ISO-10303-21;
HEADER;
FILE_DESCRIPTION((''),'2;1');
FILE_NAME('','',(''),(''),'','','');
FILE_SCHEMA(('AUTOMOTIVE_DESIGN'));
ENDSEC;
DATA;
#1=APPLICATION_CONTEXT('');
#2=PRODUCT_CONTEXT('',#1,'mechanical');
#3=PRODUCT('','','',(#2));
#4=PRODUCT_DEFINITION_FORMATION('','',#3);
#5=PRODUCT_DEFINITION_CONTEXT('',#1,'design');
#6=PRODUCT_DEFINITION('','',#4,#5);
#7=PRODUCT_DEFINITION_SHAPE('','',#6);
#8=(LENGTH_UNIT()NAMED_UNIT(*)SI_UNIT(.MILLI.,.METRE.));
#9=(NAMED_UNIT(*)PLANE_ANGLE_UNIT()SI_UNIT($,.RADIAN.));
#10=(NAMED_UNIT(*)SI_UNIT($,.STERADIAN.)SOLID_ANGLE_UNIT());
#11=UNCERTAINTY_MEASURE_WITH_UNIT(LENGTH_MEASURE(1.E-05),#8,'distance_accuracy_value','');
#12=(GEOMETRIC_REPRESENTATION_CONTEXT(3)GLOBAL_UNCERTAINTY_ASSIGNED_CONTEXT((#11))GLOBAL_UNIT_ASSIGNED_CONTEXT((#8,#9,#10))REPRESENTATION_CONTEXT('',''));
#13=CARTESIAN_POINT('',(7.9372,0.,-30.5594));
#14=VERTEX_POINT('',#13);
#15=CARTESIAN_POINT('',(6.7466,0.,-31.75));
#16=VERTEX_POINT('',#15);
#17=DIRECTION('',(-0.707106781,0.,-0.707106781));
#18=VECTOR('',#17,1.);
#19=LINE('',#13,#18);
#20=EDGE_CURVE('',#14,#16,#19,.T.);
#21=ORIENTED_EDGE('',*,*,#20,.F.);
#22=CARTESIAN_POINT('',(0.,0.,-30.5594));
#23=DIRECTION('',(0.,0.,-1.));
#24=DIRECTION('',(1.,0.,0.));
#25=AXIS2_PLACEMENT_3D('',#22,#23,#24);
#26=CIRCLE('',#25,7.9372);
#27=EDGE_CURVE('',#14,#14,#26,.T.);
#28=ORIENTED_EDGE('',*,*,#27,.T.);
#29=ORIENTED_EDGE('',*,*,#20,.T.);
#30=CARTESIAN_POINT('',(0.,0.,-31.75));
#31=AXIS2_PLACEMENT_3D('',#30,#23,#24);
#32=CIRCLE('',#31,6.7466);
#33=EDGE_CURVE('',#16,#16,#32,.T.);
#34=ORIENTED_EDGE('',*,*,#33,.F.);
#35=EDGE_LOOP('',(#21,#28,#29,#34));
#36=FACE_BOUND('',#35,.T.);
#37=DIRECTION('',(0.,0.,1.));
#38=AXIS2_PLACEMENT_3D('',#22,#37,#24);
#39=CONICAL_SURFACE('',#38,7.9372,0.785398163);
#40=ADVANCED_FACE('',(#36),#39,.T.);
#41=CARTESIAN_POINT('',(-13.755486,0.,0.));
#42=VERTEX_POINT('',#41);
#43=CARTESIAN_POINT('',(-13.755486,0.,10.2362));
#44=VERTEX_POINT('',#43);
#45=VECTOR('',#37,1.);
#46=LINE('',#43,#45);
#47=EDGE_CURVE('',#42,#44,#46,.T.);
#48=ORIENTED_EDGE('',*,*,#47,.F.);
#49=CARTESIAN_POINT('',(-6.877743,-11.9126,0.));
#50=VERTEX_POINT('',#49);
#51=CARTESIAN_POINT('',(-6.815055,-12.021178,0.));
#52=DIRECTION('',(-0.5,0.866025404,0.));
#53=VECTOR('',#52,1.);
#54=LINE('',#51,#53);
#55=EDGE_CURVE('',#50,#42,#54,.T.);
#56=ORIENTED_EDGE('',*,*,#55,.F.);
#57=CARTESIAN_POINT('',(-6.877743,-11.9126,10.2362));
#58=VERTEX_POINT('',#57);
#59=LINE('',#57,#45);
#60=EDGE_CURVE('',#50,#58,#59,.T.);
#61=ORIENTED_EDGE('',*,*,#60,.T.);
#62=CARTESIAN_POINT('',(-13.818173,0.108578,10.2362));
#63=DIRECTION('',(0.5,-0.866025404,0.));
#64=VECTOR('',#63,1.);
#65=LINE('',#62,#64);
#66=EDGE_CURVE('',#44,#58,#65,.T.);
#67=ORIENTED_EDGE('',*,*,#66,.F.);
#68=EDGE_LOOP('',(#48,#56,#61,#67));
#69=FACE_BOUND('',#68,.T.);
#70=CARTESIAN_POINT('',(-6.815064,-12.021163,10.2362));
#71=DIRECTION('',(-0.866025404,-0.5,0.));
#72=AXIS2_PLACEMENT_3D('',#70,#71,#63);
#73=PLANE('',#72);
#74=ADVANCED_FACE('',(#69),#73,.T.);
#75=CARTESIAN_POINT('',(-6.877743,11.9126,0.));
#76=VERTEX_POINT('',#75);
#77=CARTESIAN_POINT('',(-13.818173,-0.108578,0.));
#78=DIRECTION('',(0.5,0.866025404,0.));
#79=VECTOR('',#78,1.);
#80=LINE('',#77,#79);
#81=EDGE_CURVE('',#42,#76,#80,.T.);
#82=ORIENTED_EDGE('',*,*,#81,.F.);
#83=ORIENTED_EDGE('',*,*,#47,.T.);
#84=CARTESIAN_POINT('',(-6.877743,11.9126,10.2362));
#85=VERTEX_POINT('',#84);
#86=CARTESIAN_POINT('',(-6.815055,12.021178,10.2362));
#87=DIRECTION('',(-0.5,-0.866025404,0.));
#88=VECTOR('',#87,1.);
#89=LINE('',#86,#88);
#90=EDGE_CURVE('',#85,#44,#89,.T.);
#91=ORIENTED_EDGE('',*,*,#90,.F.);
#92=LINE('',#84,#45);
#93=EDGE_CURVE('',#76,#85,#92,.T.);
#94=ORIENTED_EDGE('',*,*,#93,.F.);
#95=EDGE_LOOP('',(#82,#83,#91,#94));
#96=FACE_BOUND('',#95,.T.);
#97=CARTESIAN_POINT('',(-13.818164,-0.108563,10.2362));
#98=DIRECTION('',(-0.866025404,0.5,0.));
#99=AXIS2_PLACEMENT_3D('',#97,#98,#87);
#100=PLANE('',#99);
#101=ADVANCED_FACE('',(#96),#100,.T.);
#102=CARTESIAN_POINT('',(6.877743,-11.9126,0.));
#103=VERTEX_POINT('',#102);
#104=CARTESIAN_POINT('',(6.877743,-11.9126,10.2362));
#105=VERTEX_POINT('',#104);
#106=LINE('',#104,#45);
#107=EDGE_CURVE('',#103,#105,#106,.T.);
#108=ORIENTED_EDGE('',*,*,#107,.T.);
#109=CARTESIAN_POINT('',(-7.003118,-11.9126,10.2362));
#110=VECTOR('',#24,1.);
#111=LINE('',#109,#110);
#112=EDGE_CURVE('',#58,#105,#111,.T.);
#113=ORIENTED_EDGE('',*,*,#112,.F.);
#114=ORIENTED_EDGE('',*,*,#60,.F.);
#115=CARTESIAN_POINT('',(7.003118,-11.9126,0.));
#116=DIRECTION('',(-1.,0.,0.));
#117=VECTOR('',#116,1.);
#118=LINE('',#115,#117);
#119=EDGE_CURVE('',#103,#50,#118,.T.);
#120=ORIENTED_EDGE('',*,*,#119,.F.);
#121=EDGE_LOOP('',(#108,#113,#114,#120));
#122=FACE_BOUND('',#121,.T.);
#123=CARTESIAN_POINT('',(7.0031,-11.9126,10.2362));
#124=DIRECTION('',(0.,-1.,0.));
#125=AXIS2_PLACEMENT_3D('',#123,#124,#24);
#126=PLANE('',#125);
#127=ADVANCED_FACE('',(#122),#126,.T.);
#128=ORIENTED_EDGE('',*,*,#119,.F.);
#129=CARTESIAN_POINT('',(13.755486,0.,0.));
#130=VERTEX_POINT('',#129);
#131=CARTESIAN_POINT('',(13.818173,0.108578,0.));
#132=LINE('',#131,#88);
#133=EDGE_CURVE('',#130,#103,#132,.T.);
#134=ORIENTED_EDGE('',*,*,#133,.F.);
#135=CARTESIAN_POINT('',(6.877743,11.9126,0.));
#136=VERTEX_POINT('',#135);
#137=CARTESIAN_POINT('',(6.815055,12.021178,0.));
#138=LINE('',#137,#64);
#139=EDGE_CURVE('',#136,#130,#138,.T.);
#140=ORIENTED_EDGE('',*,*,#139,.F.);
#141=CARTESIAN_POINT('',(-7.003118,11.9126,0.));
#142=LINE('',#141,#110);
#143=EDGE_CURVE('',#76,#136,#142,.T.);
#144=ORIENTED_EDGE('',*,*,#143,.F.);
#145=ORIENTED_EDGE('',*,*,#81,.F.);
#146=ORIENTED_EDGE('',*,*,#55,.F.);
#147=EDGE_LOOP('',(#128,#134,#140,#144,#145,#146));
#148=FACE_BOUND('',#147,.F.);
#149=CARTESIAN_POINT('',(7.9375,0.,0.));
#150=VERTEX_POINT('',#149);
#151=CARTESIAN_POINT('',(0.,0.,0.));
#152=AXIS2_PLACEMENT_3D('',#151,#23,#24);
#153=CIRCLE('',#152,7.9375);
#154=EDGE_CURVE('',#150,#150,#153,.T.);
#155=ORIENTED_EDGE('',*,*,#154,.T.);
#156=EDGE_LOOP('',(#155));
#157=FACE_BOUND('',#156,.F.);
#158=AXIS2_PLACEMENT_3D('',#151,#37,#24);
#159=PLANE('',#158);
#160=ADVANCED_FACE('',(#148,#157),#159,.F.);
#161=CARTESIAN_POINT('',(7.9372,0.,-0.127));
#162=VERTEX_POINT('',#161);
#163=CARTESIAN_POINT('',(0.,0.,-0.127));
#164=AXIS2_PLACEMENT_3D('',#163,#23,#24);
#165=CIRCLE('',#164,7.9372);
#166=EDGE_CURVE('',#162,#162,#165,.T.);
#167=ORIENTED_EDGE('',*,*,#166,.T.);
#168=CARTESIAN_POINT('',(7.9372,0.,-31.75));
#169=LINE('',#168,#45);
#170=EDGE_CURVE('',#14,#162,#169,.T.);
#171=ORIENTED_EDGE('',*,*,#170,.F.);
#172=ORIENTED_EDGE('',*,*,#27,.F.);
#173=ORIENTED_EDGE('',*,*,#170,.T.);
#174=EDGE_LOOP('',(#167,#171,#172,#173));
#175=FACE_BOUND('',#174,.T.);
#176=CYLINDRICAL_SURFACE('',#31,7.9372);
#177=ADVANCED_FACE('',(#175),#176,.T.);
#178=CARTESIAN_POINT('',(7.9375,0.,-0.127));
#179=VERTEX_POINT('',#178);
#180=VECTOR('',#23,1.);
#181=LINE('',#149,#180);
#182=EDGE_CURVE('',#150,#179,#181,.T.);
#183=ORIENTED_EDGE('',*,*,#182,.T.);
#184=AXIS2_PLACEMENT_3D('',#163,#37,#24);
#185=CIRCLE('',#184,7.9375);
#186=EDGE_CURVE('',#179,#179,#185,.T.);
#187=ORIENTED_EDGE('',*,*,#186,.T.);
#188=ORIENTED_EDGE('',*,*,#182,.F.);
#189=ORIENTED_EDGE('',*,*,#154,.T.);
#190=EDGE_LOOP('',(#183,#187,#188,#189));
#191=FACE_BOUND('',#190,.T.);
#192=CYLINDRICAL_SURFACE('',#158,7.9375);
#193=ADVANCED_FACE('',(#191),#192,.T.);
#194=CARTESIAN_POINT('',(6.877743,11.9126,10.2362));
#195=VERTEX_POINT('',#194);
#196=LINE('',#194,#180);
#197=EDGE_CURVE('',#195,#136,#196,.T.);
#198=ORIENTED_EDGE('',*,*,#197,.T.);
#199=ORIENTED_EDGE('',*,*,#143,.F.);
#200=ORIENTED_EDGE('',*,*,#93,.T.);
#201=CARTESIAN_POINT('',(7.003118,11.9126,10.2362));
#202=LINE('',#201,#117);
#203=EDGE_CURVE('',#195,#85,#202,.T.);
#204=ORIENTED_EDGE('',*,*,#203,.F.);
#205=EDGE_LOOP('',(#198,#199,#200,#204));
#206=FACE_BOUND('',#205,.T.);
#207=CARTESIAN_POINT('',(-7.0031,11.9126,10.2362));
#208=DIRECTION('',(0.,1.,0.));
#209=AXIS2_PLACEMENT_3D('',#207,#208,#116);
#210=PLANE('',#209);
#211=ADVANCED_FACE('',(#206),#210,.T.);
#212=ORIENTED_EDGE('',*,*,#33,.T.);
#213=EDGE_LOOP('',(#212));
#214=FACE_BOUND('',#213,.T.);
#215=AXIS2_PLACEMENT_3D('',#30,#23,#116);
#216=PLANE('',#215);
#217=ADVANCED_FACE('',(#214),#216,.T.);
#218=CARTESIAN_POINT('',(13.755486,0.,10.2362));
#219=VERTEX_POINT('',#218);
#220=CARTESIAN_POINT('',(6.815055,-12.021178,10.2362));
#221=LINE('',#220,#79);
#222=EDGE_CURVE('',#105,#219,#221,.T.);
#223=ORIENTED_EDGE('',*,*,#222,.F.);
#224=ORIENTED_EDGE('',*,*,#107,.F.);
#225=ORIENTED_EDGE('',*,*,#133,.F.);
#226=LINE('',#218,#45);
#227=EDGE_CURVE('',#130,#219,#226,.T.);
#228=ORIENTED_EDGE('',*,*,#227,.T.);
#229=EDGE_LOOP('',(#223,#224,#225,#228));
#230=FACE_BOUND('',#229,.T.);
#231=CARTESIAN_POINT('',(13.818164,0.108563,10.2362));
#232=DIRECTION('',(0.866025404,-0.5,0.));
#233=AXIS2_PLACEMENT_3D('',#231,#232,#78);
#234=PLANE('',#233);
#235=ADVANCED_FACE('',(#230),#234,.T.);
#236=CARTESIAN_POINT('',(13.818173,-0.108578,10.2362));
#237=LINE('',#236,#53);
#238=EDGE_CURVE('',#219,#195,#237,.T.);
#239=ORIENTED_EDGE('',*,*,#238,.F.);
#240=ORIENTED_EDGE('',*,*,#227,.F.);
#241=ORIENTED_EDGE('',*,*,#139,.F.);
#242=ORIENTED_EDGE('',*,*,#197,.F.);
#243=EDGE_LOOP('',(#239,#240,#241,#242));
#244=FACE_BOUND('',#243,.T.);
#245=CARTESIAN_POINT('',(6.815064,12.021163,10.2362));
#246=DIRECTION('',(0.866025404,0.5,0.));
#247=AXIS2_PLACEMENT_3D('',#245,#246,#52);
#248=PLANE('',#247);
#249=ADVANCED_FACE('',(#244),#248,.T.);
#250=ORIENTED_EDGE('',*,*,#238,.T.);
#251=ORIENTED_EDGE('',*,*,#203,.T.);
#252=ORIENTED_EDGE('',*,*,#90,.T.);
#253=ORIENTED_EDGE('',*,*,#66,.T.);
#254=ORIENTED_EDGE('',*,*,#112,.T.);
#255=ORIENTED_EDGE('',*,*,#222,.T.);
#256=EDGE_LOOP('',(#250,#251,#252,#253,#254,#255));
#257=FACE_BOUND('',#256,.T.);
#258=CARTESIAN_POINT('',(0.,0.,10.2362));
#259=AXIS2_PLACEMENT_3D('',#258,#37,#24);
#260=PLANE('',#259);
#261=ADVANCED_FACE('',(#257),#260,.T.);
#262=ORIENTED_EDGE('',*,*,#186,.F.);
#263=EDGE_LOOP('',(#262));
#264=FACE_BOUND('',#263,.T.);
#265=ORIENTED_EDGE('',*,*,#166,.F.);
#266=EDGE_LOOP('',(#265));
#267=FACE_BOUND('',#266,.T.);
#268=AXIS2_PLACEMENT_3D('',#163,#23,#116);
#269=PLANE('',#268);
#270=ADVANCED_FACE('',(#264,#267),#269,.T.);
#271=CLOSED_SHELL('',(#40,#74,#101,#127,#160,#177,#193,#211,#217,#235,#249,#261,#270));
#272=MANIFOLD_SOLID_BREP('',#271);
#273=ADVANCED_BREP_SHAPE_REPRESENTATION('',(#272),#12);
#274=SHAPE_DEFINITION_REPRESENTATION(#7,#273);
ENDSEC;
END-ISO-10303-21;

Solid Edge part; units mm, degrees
sketch "Sketch1" plane through (0, 0, 0) normal (0, 0, 1) x (1, 0, 0)
  circle A0 centre (0, 0) radius 13.8186
  dimension "D1" = 27.6372
extrude "Protrusion1" add sketch "Sketch1" along normal blind 10.2362
sketch "Sketch2" plane through (0, 0, 0) normal (0, 0, -1) x (1, 0, 0)
  circle A0 centre (0, 0) radius 7.9375
extrude "Protrusion2" add sketch "Sketch2" along normal blind 31.75
sketch "Sketch3" plane through (0, 0, -31.75) normal (0, 0, -1) x (1, 0, 0)
  circle A0 centre (0, 0) radius 7.9372
extrude "Cutout1" cut sketch "Sketch3" against normal blind 31.623 flip side to cut
chamfer "Chamfer_1" distance 1.1906 angle 45 1 edges at (-7.9372, 0, -31.75)
sketch "Sketch4" plane through (0, 0, 10.2362) normal (0, 0, 1) x (1, 0, 0)
  line L0 (-7.0031, 11.9126) -> (7.0031, 11.9126)
  dimension "D1" = 23.8252
extrude "Cutout2" cut sketch "Sketch4" against normal up to next material side at (0, 11.9626, 10.2362)
pattern_circular "Pattern1" count 6 over 360 about axis through (0, 0, 10.2362) along (0, 0, 1) of "Cutout2"
properties part number "24100745"
